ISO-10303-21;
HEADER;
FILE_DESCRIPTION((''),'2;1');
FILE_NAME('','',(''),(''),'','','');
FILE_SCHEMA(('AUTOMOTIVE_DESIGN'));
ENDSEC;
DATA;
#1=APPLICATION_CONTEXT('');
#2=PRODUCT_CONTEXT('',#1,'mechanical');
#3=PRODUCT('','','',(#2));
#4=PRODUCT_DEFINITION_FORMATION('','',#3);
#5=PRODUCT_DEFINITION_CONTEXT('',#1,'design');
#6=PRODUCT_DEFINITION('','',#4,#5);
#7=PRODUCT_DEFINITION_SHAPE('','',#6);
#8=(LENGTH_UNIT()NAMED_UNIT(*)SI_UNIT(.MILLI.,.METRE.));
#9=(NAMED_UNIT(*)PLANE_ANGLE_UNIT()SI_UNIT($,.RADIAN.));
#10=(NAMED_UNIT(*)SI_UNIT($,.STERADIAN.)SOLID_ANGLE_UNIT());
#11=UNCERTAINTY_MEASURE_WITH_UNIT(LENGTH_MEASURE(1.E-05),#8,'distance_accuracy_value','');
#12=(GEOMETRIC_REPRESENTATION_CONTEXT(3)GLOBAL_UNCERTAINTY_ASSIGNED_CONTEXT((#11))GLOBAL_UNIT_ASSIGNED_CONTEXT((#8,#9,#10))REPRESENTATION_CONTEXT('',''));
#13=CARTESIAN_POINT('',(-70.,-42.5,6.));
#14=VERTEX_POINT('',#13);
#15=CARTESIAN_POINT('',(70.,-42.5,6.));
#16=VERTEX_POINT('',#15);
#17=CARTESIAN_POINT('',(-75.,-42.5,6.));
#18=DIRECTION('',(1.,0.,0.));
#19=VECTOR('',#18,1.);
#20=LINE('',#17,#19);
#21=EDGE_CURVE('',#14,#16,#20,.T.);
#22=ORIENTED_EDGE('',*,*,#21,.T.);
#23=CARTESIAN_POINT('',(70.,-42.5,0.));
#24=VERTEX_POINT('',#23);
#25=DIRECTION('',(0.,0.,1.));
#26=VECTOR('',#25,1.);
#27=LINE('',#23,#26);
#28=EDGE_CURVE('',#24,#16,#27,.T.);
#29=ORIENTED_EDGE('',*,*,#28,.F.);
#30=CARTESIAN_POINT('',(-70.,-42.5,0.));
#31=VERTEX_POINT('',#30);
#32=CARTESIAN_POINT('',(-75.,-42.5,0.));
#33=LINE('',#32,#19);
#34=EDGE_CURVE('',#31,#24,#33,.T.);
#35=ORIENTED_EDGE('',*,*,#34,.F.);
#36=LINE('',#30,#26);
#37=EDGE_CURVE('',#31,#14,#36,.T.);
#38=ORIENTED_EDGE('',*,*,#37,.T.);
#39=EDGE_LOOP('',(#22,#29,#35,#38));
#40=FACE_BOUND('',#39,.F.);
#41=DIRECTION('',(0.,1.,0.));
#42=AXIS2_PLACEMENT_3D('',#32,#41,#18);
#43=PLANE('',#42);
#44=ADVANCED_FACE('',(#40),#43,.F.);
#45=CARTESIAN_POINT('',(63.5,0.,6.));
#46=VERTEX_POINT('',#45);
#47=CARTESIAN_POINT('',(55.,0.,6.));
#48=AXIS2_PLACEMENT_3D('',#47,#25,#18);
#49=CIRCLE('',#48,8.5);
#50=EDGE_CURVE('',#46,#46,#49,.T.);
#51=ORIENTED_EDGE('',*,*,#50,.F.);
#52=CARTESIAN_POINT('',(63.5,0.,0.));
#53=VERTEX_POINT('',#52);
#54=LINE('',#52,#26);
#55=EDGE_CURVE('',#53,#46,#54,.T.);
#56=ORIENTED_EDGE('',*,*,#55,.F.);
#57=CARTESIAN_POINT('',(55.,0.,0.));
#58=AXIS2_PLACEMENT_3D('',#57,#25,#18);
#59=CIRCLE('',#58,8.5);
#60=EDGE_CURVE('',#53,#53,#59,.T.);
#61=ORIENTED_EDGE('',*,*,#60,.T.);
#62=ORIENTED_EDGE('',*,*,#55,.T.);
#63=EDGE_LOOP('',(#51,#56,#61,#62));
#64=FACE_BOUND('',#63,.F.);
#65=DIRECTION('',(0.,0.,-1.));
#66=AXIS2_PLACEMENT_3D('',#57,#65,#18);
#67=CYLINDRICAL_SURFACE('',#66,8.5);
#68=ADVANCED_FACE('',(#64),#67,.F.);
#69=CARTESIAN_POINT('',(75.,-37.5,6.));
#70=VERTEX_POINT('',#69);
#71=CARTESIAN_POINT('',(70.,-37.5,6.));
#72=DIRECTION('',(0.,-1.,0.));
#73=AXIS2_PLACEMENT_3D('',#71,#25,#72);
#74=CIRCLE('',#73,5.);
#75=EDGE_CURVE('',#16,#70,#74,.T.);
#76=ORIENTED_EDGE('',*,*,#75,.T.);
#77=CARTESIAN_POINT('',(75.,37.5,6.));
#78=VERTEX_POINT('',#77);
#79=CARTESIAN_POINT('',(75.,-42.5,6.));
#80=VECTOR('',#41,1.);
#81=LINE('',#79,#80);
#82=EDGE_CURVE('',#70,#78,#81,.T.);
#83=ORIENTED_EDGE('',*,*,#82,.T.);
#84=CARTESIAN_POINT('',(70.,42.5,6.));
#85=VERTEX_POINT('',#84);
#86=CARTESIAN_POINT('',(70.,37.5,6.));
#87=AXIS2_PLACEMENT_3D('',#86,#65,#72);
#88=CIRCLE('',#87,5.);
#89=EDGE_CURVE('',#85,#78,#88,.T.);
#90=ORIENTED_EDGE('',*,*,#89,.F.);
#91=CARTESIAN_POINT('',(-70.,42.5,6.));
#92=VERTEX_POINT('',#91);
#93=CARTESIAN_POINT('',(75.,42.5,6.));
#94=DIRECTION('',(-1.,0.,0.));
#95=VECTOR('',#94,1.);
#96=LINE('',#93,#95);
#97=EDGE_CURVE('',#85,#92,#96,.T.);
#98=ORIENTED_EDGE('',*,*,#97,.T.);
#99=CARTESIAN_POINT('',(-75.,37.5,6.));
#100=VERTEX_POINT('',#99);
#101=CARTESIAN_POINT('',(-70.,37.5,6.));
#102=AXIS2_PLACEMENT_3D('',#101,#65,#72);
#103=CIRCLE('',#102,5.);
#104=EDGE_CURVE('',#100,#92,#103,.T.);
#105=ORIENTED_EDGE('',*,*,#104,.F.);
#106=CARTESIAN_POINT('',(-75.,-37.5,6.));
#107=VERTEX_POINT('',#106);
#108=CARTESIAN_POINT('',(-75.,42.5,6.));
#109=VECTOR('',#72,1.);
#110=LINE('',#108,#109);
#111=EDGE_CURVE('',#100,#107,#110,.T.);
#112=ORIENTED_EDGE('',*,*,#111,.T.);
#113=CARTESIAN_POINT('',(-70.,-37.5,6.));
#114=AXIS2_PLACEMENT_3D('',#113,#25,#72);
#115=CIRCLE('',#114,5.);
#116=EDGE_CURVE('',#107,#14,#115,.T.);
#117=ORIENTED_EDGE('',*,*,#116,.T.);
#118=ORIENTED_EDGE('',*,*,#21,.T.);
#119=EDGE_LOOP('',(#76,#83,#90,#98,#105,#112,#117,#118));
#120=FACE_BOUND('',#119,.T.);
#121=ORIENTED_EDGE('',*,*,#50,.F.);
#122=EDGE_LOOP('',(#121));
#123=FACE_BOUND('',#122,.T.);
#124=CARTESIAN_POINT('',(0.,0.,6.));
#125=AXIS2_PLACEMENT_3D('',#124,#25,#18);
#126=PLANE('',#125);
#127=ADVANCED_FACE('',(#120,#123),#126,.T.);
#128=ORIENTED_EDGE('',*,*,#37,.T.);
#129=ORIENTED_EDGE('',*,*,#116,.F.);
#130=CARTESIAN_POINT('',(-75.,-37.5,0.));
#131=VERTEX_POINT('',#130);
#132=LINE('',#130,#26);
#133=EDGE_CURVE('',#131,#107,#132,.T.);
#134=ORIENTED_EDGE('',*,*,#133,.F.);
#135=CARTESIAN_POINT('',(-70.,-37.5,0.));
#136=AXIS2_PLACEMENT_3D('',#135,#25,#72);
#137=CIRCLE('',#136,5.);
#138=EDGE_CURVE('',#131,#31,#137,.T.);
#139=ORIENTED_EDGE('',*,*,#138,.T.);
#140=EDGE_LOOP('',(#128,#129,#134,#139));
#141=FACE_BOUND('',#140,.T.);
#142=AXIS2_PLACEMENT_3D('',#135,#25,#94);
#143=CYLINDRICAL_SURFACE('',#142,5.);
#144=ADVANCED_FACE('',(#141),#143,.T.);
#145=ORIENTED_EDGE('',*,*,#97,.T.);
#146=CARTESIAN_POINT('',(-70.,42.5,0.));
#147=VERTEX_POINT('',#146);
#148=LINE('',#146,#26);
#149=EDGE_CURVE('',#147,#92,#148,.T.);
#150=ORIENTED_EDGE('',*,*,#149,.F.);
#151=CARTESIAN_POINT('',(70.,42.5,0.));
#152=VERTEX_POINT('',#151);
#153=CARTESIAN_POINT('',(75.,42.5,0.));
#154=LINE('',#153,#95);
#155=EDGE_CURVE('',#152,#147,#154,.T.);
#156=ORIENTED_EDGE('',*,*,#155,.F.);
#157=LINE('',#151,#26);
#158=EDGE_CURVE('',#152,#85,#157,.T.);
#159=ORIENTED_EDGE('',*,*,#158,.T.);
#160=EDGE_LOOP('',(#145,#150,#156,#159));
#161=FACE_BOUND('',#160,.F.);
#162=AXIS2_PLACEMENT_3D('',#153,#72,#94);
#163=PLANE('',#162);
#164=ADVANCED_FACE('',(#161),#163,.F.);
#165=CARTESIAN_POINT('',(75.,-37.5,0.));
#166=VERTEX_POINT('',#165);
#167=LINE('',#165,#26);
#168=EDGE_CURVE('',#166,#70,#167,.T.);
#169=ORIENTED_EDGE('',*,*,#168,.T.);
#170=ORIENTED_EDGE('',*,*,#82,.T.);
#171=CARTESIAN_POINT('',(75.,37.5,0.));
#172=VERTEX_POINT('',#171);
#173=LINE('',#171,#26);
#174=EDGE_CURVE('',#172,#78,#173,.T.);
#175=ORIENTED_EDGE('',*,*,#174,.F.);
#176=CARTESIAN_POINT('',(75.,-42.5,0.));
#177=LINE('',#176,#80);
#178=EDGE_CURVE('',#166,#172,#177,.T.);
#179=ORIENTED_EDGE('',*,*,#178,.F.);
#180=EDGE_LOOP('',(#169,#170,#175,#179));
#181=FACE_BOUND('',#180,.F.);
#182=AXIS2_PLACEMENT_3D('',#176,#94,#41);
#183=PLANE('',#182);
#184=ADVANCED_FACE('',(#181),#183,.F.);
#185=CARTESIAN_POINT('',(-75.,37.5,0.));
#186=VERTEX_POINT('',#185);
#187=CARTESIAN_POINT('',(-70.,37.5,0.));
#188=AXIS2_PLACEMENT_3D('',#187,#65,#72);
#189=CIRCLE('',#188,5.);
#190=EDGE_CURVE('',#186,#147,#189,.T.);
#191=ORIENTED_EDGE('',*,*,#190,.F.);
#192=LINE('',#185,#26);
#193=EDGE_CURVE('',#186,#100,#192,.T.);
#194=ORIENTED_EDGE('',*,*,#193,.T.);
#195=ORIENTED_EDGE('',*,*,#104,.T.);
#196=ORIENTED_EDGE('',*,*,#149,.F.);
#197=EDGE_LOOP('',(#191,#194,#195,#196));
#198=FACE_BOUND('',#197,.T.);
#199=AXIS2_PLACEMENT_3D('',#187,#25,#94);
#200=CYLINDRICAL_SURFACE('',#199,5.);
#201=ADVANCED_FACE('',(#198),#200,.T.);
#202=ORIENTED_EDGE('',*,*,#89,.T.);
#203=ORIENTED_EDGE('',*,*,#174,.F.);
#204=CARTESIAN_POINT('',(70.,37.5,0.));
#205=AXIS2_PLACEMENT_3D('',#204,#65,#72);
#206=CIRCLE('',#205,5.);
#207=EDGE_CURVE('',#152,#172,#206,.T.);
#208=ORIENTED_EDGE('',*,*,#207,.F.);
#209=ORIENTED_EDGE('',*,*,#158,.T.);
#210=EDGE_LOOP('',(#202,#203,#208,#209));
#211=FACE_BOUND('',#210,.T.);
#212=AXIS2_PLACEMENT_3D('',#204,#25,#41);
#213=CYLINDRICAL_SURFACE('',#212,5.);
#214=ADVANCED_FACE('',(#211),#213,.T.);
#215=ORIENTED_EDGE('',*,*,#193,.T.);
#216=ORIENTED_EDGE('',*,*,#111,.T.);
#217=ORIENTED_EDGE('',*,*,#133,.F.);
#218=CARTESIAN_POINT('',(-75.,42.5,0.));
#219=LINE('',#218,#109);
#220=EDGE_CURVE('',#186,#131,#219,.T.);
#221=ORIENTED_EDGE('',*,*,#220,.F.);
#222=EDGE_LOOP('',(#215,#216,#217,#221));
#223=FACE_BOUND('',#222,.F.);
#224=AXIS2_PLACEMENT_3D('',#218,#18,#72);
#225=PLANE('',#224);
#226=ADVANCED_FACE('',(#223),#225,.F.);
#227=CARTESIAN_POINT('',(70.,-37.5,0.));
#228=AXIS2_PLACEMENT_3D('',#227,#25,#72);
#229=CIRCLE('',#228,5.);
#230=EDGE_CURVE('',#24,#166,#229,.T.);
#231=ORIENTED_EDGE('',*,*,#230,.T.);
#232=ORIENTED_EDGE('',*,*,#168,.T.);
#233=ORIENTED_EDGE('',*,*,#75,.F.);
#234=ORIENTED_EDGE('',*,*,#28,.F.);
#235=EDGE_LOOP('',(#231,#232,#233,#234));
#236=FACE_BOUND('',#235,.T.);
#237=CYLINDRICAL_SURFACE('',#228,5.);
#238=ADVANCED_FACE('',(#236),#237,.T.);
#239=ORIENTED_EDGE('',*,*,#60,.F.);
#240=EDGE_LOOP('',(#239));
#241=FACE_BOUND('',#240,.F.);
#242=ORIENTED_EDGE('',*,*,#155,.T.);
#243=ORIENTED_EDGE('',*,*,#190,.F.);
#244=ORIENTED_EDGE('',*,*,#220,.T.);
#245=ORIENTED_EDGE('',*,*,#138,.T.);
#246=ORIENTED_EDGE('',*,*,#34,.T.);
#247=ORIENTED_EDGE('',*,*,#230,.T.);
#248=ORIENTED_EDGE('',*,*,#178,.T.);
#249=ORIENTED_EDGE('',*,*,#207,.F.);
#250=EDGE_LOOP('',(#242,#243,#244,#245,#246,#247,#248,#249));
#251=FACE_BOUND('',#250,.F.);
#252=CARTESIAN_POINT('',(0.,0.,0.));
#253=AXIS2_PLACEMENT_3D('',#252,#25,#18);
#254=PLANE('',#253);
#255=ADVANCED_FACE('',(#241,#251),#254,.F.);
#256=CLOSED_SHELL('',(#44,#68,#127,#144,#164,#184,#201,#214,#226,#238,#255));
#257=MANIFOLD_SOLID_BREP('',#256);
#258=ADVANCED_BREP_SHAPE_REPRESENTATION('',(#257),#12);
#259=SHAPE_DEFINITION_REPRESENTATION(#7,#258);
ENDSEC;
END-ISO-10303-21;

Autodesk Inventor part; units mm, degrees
ref_plane "YZ Plane" through (0, 0, 0) normal (1, 0, 0) x (0, 1, 0)
ref_plane "XZ Plane" through (0, 0, 0) normal (0, 1, 0) x (-1, 0, 0)
ref_plane "XY Plane" through (0, 0, 0) normal (0, 0, 1) x (1, 0, 0)
sketch "Sketch1" plane through (0, 0, 0) normal (0, 0, 1) x (1, 0, 0)
  line L0 (-75, -42.5) -> (75, -42.5)
  line L1 (75, -42.5) -> (75, 42.5)
  line L2 (75, 42.5) -> (-75, 42.5)
  line L3 (-75, 42.5) -> (-75, -42.5)
  line L4 (-75, -42.5) -> (75, 42.5) construction
  line L5 (75, -42.5) -> (-75, 42.5) construction
  circle A0 centre (55, -22.5) radius 8.5
  circle A1 centre (55, 22.5) radius 8.5
  line L6 (0, 0) -> (75, 0) construction
  circle A2 centre (55, 0) radius 8.5
  dimension "d0" = 150
  dimension "d1" = 85
  dimension "d23" = 17
  dimension "d25" = 20
  dimension "d26" = 20
extrude "Plate1" add sketch "Sketch1" along normal blind 6 contours L3 L2 L1 L0 | A0 | A1
sketch "Sketch5" plane through (0, 0, 6) normal (0, 0, 1) x (1, 0, 0)
  line L0 (75, -42.5) -> (-75, -42.5) projected
  line L1 (-75, -42.5) -> (-75, 42.5) projected
  line L2 (-75, 42.5) -> (75, 42.5) projected
  circle A0 centre (-32.5, 0) radius 42.5
  circle A1 centre (-32.5, 0) radius 5
  point P0 (0, 0)
  point P1 (50, -55)
  point P2 (-50, -55)
  point P3 (-70, -35)
  point P4 (-70, 35)
  point P5 (-50, 55)
  point P6 (50, 55)
  dimension "d27" = 10
extrude "Extrusion2" [suppressed]
fillet "Corner Round2" radius 5 4 edges at (-75, 42.5, 3) (-75, -42.5, 3) (75, -42.5, 3) (75, 42.5, 3)
equation "\"d26\" = d25"
equation "\"d2\" = Thickness"
equation "\"BendReliefWidth\" = Thickness"
equation "\"BendReliefDepth\" = 0.5 * Thickness"
equation "\"CornerReliefSize\" = 4 * Thickness"
equation "\"MinimumRemnant\" = 2 * Thickness"
equation "\"TransitionRadius\" = BendRadius"
equation "\"JacobiRadiusSize\" = BendRadius"
equation "\"GapSize\" = Thickness"
equation "\"Thickness\" = 6"
equation "\"BendRadius\" = 5"
properties part number "SLM 1695 leg floor plate" material "Stainless Steel"
